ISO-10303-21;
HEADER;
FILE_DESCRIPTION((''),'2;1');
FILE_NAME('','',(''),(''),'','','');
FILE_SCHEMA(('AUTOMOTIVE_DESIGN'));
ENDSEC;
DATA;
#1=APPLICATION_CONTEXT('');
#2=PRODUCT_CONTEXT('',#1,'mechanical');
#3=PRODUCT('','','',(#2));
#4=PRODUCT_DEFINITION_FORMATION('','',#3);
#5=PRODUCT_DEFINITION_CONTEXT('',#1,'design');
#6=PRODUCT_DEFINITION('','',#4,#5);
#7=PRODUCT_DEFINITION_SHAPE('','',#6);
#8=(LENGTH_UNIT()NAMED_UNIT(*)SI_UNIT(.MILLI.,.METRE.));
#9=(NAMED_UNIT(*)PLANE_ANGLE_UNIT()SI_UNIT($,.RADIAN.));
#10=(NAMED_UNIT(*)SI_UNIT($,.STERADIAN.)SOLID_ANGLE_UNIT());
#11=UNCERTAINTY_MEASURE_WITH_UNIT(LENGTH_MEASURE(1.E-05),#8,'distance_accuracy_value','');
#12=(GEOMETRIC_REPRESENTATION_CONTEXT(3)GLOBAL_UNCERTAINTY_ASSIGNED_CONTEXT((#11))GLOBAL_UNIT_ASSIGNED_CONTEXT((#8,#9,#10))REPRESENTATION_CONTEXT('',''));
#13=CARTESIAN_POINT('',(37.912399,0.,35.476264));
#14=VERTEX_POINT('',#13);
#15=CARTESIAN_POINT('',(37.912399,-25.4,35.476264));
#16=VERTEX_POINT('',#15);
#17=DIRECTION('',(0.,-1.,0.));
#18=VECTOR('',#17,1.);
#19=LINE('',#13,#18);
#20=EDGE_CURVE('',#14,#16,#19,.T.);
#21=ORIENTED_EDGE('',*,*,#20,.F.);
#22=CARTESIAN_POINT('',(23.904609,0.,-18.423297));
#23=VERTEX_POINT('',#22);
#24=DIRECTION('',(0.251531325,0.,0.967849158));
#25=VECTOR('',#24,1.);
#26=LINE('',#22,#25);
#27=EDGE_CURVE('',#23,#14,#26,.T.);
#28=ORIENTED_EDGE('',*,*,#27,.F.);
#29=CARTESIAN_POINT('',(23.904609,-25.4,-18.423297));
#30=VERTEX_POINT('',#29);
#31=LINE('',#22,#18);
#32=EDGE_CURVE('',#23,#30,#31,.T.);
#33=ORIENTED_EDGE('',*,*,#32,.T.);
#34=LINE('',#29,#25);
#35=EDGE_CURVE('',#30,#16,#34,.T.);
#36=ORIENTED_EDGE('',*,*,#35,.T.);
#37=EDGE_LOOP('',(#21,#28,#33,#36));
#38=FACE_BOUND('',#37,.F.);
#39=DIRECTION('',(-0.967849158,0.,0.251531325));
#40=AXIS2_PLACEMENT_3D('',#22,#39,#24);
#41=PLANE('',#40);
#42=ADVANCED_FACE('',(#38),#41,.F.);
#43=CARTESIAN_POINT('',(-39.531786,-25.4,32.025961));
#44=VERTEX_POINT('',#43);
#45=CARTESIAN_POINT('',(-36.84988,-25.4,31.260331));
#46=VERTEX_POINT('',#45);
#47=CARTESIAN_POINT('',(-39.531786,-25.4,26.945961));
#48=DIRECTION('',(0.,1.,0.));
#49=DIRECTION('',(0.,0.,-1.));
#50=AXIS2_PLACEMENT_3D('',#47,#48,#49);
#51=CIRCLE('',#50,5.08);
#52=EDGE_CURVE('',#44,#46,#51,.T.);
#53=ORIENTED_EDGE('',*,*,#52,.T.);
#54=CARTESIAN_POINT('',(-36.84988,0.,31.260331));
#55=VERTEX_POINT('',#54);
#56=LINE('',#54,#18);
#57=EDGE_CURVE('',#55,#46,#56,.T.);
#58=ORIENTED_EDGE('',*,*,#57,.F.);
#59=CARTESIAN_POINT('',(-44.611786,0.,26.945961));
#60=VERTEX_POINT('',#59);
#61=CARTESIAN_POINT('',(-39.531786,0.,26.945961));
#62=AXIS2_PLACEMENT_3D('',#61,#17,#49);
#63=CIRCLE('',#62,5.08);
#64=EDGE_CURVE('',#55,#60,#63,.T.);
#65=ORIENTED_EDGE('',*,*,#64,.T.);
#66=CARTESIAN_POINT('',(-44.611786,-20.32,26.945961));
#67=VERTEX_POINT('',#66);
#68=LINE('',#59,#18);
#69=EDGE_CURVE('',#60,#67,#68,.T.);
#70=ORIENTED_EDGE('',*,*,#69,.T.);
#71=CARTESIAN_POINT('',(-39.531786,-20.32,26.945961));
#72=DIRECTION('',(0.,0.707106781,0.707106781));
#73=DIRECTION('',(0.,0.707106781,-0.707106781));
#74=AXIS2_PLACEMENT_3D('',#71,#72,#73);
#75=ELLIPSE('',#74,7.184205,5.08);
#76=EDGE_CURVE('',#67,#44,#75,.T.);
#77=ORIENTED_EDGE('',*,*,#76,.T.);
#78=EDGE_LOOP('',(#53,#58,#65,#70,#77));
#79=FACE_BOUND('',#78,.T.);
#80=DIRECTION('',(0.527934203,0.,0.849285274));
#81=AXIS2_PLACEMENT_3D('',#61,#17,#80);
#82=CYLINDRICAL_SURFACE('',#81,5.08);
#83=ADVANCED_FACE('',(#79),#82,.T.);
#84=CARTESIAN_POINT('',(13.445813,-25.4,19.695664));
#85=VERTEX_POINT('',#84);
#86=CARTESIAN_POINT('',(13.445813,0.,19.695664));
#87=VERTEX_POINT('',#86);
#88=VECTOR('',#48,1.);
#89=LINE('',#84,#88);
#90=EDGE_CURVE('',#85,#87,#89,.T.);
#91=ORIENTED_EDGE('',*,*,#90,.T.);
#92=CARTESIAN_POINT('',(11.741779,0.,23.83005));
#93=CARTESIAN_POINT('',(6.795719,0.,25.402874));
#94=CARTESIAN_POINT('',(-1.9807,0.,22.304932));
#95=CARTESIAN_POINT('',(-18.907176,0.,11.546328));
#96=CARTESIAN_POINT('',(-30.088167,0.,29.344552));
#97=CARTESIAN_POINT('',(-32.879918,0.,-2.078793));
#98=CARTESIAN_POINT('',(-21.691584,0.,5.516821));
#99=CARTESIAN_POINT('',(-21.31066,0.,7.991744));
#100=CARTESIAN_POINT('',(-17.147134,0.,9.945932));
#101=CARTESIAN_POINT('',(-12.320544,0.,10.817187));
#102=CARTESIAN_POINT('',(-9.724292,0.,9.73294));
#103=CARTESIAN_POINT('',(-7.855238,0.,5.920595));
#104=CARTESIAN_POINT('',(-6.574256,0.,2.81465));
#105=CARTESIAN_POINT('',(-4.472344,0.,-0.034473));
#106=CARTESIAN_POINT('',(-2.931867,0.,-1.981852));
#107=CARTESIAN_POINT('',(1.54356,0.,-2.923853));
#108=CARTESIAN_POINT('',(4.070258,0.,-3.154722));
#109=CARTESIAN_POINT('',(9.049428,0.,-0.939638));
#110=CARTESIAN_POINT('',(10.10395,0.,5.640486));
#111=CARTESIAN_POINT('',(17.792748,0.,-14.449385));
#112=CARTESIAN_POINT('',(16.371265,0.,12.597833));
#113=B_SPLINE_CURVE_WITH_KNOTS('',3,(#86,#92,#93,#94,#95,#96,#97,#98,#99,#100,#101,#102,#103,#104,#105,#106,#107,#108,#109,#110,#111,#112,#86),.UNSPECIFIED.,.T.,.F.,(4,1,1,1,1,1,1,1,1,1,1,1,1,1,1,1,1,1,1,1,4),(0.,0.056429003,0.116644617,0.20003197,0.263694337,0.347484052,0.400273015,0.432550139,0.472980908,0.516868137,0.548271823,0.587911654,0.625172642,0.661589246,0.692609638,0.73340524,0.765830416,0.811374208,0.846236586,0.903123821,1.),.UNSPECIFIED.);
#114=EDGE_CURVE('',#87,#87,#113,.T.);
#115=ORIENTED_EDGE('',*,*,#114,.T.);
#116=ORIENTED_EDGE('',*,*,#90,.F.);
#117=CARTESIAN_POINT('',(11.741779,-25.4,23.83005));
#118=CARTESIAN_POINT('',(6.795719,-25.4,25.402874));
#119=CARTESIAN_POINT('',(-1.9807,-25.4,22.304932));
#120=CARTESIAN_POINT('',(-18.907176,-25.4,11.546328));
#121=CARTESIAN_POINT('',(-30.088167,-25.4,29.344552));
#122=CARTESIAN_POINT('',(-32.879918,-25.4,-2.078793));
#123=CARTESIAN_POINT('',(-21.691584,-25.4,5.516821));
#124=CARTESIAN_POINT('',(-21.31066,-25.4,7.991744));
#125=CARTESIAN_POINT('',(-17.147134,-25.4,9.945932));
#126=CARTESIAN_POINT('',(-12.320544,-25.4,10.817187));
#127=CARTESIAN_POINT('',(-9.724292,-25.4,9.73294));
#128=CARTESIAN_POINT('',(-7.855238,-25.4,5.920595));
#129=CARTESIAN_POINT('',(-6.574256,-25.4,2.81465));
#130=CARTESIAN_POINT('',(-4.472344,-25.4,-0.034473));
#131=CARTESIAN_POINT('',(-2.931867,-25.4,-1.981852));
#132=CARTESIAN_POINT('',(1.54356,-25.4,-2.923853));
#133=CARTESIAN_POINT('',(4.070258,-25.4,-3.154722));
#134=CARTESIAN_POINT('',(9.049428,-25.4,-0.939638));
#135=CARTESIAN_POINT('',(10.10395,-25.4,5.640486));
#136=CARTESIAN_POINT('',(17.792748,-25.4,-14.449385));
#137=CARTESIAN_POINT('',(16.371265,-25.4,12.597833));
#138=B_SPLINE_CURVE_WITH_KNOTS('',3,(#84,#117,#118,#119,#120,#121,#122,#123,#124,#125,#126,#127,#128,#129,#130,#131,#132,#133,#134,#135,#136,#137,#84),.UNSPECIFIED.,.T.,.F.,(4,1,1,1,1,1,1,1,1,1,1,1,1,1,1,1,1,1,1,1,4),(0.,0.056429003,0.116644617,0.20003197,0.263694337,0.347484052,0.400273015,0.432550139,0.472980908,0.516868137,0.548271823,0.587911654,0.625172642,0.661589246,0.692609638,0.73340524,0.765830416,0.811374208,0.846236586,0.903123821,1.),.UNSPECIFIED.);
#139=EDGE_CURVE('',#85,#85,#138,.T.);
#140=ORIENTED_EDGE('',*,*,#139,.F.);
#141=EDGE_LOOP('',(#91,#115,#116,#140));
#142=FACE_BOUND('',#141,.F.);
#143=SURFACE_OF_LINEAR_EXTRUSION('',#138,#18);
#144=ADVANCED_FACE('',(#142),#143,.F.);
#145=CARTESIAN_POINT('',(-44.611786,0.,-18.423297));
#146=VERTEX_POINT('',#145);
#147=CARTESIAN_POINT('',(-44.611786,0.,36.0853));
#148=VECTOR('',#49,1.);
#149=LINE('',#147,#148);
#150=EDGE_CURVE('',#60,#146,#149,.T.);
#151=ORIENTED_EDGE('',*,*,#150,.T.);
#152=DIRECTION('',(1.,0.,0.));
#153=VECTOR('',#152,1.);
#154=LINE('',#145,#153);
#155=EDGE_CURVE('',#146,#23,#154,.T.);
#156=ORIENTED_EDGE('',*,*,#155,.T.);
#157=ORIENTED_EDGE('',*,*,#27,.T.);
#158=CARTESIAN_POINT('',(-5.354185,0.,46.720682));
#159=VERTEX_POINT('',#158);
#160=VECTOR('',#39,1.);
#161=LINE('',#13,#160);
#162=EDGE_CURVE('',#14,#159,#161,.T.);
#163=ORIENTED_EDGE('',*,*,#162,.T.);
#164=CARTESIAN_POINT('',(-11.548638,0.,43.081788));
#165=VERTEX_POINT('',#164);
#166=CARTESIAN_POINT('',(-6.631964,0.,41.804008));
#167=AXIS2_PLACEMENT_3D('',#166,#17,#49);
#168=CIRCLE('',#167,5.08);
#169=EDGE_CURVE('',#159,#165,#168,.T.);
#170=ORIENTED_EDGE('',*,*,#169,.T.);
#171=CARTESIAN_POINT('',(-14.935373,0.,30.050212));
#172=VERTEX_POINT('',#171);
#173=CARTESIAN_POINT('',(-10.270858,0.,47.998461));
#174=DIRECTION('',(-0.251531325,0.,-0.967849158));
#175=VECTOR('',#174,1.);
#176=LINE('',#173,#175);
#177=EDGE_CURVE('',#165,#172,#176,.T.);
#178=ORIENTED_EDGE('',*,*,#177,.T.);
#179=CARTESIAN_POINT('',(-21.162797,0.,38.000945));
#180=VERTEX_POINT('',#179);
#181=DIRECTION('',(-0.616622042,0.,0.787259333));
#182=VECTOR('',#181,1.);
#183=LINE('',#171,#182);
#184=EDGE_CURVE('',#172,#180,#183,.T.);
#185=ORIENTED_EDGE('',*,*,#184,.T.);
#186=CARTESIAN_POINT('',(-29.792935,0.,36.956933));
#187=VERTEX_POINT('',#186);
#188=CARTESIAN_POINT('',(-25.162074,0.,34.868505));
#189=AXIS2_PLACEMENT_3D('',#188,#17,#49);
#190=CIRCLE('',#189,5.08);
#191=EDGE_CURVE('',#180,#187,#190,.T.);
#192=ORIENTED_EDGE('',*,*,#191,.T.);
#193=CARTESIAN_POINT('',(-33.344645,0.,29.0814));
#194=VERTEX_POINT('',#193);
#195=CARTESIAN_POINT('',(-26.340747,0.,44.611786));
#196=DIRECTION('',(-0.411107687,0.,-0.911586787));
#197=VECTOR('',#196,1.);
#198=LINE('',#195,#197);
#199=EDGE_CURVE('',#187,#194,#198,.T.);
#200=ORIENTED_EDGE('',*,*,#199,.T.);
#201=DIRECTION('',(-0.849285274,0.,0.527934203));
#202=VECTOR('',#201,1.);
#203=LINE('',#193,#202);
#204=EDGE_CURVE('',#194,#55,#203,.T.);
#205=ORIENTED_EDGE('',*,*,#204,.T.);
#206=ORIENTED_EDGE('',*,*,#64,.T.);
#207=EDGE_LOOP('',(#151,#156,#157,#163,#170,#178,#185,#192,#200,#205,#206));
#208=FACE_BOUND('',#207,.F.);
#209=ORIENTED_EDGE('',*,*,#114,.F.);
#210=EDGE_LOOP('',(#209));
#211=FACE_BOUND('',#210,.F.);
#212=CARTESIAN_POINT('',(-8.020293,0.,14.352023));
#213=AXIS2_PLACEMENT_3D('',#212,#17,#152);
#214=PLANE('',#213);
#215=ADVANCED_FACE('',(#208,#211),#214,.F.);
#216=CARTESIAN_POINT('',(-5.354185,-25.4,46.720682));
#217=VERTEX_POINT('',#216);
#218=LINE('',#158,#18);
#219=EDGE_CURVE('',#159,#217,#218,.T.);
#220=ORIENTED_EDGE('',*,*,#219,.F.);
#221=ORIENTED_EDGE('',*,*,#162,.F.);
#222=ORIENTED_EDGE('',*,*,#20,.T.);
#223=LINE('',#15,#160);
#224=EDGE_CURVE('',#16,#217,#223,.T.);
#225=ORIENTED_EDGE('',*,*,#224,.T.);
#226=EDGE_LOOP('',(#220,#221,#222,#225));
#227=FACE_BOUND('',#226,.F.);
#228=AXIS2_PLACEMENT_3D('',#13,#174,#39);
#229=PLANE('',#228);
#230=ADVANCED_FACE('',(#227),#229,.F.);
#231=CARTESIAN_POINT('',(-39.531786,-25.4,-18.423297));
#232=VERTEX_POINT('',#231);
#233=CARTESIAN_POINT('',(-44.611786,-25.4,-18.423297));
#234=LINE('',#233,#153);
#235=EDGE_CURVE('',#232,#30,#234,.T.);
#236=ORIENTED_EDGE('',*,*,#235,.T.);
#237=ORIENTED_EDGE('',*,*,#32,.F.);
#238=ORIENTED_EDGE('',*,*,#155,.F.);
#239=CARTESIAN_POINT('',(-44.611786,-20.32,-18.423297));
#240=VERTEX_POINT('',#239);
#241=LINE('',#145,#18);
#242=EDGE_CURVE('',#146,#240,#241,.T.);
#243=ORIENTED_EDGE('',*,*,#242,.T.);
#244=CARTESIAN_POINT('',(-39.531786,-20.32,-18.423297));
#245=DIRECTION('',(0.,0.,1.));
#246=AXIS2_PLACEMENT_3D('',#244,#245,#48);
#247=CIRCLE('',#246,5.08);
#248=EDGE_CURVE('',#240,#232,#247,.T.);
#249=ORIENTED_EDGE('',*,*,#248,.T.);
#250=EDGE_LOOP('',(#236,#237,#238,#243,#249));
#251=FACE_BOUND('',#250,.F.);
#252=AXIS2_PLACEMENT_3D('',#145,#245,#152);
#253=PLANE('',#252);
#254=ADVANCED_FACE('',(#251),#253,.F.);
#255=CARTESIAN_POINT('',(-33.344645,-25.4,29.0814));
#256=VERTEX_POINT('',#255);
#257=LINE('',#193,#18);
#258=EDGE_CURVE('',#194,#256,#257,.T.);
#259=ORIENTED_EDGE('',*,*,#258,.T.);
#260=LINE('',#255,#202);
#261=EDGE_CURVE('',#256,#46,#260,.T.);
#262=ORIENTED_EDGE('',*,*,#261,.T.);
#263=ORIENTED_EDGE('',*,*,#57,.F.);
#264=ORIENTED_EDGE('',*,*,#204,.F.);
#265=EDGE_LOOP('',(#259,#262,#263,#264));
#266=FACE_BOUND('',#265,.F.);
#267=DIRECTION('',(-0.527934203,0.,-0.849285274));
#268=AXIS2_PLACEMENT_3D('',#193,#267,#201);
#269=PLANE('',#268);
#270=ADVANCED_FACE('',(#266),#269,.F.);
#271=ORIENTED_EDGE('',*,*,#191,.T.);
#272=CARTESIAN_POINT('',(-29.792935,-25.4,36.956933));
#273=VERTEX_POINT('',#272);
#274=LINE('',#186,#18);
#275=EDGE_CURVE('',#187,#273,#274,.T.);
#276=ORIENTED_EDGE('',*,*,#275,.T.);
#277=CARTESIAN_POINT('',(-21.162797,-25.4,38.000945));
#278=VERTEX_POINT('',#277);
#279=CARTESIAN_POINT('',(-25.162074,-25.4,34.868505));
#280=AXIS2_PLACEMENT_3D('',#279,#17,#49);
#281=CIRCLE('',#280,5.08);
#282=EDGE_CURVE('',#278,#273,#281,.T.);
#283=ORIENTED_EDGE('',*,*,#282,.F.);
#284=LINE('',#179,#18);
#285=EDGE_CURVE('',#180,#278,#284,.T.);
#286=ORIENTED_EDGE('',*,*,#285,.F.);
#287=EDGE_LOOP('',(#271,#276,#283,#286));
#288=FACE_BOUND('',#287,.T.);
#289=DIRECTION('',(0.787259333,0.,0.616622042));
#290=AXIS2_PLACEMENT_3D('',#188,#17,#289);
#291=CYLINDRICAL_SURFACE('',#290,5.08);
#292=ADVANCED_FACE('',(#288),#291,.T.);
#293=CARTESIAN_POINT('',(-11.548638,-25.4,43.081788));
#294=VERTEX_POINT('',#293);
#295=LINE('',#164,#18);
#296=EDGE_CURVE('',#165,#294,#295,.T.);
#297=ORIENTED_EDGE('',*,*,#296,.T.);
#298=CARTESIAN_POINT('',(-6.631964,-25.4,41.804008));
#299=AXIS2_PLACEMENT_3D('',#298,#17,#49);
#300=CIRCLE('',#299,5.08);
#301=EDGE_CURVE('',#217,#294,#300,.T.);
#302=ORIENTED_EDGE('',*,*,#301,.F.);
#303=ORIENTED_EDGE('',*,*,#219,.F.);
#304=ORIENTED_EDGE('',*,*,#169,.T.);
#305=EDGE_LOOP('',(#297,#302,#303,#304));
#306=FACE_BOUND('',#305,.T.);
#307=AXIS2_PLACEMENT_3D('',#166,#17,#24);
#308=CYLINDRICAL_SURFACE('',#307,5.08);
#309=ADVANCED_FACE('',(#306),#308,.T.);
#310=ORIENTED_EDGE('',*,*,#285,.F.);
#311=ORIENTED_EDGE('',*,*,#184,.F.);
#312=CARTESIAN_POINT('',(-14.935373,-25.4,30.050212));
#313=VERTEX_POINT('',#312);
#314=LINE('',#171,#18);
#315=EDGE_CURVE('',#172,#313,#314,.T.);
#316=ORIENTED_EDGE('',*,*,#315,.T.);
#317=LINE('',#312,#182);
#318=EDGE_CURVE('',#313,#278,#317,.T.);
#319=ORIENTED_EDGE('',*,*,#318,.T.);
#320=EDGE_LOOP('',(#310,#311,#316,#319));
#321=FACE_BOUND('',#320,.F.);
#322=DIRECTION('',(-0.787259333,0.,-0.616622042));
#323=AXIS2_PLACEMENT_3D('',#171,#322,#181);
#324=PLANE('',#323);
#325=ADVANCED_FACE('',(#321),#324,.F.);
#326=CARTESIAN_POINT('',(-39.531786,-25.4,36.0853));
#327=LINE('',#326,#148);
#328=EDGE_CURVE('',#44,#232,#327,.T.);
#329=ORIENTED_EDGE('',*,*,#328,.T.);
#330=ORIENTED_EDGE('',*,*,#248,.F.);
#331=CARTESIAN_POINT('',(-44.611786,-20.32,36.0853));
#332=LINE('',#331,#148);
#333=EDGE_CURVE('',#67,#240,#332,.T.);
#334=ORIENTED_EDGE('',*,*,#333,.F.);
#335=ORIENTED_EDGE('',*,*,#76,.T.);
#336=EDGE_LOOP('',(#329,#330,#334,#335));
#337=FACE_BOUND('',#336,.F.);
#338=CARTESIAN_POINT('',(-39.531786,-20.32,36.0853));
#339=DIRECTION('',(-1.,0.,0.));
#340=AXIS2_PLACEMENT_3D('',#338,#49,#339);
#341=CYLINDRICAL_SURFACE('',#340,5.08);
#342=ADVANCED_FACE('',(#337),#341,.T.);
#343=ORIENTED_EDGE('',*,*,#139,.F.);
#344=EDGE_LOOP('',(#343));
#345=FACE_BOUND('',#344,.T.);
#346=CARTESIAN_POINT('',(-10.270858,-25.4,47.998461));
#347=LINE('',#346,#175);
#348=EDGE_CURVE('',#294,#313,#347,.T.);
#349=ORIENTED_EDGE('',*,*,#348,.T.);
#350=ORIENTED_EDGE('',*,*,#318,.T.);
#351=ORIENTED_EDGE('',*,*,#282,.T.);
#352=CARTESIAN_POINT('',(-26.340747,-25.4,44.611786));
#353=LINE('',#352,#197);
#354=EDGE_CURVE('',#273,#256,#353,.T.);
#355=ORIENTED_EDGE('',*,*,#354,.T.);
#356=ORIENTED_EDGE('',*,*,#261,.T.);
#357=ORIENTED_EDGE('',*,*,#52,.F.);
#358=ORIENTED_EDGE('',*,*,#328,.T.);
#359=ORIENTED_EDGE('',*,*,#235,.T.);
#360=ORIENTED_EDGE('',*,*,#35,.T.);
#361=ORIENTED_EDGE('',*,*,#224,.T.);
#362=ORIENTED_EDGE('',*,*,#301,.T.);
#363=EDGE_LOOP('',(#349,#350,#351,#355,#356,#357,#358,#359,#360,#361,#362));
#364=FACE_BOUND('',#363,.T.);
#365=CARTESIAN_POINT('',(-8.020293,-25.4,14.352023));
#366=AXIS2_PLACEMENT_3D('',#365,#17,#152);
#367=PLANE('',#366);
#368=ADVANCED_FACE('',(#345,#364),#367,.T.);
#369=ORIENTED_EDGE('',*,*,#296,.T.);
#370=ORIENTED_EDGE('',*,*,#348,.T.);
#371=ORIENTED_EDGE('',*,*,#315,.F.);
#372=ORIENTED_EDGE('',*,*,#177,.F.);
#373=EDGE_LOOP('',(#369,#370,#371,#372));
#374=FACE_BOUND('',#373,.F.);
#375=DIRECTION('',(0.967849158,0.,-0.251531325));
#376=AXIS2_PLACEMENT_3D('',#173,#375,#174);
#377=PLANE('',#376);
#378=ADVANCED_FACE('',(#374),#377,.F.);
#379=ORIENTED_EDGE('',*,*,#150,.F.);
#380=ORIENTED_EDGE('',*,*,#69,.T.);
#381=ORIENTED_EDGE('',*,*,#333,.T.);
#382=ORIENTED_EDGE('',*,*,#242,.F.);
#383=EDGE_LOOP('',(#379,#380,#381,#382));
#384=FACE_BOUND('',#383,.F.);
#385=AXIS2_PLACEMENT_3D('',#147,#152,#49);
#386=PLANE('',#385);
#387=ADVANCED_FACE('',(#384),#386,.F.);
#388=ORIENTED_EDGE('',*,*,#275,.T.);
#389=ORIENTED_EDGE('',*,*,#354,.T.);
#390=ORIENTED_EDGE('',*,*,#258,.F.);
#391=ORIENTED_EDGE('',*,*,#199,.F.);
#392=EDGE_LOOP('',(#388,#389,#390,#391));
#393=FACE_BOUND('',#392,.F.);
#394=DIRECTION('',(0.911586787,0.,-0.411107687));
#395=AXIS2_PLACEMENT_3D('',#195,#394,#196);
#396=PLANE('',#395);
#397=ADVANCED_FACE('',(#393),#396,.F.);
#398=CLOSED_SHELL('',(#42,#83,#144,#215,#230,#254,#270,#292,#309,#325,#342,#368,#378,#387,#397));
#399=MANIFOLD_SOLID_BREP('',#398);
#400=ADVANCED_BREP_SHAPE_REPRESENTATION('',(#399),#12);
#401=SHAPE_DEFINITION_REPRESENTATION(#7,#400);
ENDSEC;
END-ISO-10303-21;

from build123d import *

# Parameters (mm, degrees)
F1_DEPTH = 25.4
F2_R     = 5.08
F4_DEPTH = 25.4


with BuildPart() as f1:
    # F0 (on Front) → F1 (new body)
    with BuildSketch(Plane.XZ):
        Polygon((-33.3446450531, 29.0814004838), (-44.6117855608, 36.0853001475), (-44.6117855608, -18.4232965112), (23.9046085626, -18.4232965112), (37.9123985767, 35.4762636125), (-10.2708584407, 47.9984612881), (-14.9353733665, 30.0502123182), (-26.3407472521, 44.6117855608), align=None)
    extrude(amount=F1_DEPTH)

    # F2
    f2_edges = [f1.edges().sort_by_distance(p)[0] for p in [
        (-26.340747, -12.7, 44.611786),
        (-10.270858, -12.7, 47.998461),
        (-44.611786, -12.7, 36.0853),
        (-44.611786, -25.4, 8.831002),
    ]]
    fillet(f2_edges, radius=F2_R)

    # F3 (on face) → F4 (cut)
    with BuildSketch(Plane.XZ.offset(25.4)):
        with BuildLine():
            add(Edge.make_bspline(
                [(13.4458132088, 19.6956638247), (11.74177874, 23.8300496783), (6.7957187469, 25.4028744107), (-1.9807003124, 22.3049317252), (-18.9071758323, 11.5463276334), (-30.0881670737, 29.3445522935), (-32.8799181246, -2.0787929379), (-21.6915838982, 5.5168211689), (-21.3106596952, 7.9917435161), (-17.1471336221, 9.9459320622), (-12.3205443457, 10.8171874288), (-9.7242920208, 9.7329395204), (-7.8552380833, 5.9205949814), (-6.5742563999, 2.8146495514), (-4.4723437738, -0.0344728039), (-2.9318667739, -1.9818520668), (1.5435597025, -2.9238525321), (4.0702578631, -3.154721813), (9.0494277088, -0.9396378917), (10.1039499737, 5.6404859645), (17.7927477883, -14.4493846447), (16.3712653316, 12.5978332976), (13.4458132088, 19.6956638247)],
                knots=[0, 0, 0, 0, 0.0564290034, 0.1166446169, 0.2000319696, 0.2636943375, 0.3474840522, 0.4002730146, 0.4325501392, 0.4729809081, 0.516868137, 0.5482718229, 0.587911654, 0.6251726423, 0.661589246, 0.6926096381, 0.7334052397, 0.7658304164, 0.8113742078, 0.846236586, 0.9031238213, 1, 1, 1, 1], degree=3))
        make_face()
    extrude(amount=-F4_DEPTH, mode=Mode.SUBTRACT)


solid = f1.part
